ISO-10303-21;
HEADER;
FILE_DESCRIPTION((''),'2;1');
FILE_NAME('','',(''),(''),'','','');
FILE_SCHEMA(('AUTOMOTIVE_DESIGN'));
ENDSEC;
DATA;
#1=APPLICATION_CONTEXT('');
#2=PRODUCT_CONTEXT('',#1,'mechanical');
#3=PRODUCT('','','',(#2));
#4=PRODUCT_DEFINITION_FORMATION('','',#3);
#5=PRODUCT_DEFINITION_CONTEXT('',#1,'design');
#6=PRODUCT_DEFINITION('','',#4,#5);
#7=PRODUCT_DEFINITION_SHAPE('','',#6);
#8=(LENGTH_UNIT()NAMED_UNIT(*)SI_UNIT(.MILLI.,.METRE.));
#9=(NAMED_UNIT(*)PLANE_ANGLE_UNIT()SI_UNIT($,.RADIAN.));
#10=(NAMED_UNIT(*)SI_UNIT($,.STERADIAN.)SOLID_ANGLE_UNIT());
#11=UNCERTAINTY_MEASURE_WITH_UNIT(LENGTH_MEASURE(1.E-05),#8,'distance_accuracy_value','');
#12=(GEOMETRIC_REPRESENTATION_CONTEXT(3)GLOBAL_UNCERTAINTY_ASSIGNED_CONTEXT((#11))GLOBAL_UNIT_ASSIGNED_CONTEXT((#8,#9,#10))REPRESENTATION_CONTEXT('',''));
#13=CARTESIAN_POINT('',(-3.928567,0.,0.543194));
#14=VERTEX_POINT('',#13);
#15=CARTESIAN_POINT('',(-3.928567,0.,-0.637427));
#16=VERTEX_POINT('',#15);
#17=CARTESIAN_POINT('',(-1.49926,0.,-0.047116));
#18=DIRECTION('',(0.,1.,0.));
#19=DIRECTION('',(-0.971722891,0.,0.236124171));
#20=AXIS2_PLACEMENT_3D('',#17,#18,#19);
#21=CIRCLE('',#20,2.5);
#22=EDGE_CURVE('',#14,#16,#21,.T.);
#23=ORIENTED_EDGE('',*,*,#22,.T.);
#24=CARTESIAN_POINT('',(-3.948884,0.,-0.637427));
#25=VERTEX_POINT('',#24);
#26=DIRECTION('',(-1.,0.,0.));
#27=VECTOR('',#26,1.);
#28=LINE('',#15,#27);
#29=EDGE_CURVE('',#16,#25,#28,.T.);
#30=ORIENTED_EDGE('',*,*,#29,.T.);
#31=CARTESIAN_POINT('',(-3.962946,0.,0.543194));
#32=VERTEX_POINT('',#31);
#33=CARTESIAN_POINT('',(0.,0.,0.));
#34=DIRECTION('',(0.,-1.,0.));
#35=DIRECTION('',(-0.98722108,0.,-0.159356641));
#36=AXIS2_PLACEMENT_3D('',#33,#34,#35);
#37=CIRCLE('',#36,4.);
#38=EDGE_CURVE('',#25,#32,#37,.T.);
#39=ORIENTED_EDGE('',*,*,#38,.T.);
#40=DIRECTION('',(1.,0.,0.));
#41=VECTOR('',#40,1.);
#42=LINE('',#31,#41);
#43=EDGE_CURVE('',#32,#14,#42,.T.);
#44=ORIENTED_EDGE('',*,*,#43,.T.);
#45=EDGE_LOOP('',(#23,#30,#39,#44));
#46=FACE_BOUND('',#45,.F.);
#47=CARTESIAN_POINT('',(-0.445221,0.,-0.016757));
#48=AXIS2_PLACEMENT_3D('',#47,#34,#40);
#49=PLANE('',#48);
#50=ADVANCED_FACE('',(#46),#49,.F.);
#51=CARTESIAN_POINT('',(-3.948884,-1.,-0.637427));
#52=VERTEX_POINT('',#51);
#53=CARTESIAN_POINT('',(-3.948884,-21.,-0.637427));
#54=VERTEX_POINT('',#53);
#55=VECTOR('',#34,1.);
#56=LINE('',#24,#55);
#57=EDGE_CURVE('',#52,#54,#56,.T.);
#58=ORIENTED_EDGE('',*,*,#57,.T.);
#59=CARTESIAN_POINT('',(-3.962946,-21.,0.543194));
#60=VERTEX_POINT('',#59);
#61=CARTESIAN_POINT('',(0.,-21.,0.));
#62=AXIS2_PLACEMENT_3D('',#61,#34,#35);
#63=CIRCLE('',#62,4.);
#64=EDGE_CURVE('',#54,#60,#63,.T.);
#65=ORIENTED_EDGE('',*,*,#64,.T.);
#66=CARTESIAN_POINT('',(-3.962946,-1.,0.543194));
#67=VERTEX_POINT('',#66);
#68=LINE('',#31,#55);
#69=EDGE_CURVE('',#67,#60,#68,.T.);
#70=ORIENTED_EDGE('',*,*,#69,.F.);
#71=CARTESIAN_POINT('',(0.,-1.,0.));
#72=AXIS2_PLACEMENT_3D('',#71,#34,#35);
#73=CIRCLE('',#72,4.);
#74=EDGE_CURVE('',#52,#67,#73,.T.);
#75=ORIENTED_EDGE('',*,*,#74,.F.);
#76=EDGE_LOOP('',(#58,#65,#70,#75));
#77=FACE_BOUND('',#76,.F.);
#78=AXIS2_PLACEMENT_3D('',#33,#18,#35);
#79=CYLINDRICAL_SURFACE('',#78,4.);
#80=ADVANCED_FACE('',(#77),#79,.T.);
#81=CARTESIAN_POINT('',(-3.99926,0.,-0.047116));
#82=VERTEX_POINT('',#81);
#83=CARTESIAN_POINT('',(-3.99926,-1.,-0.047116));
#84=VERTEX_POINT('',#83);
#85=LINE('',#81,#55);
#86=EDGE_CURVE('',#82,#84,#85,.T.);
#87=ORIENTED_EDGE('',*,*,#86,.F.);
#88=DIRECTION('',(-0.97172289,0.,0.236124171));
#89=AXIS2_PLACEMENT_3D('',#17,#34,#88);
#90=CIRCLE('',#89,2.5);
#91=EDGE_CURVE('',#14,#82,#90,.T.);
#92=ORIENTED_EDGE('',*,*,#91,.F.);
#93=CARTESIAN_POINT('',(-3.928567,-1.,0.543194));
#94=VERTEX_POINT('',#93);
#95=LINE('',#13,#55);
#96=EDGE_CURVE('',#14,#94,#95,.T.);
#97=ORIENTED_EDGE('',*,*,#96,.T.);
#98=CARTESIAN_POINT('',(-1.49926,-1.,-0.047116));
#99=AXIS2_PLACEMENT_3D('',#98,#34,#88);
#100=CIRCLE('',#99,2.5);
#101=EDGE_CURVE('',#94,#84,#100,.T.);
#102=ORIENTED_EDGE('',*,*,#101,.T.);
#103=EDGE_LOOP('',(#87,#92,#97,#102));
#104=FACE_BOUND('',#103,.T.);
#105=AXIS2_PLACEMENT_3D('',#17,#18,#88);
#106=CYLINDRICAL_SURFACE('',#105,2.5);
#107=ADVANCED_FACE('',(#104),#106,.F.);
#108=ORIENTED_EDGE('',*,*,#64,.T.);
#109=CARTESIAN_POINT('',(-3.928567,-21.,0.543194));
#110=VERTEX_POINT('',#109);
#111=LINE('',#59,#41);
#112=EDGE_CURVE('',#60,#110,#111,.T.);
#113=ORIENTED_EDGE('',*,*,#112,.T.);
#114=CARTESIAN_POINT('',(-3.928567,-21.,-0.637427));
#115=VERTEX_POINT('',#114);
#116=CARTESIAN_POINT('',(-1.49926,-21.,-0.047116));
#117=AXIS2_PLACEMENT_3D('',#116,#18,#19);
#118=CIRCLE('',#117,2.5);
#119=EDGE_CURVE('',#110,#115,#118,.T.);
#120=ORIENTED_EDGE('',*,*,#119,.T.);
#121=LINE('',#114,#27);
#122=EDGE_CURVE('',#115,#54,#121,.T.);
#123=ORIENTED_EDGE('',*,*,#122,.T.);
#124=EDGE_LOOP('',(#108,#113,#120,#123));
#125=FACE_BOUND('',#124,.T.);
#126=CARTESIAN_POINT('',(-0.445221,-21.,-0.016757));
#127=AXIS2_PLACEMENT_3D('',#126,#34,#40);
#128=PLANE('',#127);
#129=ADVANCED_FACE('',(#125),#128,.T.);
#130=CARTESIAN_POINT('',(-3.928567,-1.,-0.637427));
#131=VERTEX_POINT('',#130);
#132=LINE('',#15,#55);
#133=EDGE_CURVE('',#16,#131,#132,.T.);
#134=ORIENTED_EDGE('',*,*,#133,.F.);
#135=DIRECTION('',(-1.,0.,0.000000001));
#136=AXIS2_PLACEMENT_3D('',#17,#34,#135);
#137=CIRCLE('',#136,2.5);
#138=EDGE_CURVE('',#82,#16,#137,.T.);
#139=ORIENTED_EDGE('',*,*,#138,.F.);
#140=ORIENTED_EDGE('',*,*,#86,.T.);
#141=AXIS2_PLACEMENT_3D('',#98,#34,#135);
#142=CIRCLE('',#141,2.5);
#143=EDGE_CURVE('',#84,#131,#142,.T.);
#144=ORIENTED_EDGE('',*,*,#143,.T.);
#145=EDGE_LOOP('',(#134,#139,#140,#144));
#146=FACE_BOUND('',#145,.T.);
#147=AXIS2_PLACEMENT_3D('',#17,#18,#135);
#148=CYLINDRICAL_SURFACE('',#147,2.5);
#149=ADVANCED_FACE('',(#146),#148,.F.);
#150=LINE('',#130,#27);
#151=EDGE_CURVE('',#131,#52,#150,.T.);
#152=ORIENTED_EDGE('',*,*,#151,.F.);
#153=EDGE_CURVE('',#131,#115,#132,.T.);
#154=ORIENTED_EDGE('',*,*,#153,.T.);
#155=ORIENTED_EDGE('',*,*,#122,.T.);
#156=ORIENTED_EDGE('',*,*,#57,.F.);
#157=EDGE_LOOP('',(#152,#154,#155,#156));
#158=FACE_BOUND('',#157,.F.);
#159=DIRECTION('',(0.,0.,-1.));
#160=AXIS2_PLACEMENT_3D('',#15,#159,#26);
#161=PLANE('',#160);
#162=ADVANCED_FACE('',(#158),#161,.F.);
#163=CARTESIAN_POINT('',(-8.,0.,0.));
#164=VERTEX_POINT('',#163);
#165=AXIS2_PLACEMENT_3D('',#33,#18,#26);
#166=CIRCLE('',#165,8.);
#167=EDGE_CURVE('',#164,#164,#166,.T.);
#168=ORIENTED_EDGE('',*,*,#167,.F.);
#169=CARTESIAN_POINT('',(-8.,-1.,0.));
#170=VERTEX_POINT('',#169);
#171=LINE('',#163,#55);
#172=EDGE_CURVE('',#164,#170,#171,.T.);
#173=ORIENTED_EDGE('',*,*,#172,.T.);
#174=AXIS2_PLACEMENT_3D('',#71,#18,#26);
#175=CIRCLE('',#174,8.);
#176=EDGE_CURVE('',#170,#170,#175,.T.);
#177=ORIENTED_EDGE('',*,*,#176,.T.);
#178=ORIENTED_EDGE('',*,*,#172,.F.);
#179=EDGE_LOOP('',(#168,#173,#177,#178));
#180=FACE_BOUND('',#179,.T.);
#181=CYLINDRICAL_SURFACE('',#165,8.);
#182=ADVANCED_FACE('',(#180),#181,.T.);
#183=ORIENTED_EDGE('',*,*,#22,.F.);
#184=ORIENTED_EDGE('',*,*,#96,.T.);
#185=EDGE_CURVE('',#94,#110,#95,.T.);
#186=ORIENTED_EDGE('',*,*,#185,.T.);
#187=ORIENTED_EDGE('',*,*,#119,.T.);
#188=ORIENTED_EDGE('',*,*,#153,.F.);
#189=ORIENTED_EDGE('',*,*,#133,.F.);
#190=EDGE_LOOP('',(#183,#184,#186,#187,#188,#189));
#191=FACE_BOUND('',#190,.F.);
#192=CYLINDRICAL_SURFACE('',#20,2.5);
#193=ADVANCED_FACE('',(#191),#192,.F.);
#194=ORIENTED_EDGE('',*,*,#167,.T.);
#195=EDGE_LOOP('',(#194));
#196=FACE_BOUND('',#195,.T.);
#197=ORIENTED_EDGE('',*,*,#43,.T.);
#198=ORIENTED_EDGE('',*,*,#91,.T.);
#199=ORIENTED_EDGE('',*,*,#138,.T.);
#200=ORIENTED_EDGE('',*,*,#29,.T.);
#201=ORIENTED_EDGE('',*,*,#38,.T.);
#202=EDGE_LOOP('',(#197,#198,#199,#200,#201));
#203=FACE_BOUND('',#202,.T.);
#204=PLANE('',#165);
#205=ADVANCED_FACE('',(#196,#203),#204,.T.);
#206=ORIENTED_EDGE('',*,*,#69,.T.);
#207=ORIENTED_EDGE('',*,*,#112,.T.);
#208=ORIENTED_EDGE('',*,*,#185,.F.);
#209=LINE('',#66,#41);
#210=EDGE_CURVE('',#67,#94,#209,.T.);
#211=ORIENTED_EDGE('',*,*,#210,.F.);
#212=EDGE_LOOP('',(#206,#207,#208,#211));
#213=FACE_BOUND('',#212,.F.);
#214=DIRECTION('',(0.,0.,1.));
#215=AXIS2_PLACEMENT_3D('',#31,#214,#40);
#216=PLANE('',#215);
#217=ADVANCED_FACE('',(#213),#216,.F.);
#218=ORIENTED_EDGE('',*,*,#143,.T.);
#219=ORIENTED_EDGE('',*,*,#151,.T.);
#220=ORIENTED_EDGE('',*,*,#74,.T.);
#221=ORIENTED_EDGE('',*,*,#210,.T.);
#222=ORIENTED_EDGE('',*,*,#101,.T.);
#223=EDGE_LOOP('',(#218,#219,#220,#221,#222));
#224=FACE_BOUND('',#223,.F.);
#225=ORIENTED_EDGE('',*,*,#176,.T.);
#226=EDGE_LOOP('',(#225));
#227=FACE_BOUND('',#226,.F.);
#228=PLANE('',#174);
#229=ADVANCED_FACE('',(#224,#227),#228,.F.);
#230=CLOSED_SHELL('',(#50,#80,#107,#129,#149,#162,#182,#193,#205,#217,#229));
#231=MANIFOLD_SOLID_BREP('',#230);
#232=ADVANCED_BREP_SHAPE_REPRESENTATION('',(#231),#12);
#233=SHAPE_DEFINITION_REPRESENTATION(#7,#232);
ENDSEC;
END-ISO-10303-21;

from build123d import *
from build123d import SkipClean  # not in build123d's __all__

# Parameters (mm, degrees)
F1_DEPTH = 21
F2_R     = 8
F3_DEPTH = 1


with BuildPart() as f1:
    # F0 (on Front) → F1 (new body)
    with BuildSketch(Plane.XZ):
        with BuildLine():
            Line((-3.928567067, -0.6374265649), (-3.9488843202, -0.6374265649))
            ThreePointArc((-3.9488843202, -0.6374265649), (3.9997163197, 0.0476378244), (-3.9629458697, 0.5431942877))
            Line((-3.9629458697, 0.5431942877), (-3.928567067, 0.5431942877))
            ThreePointArc((-3.928567067, 0.5431942877), (1.0007401595, -0.0471161386), (-3.928567067, -0.6374265649))
        make_face()
    extrude(amount=F1_DEPTH)

    # F2 (on face) → F3 (join)
    with BuildSketch(Plane(origin=(0, 0, 0), x_dir=(-1, 0, 0), z_dir=(0, 1, 0))):
        Circle(F2_R)
        with BuildLine():
            ThreePointArc((3.928567067, 0.5431942877), (3.9815237333, 0.250147998), (3.9992598405, -0.0471161386))
            ThreePointArc((3.9992598405, -0.0471161386), (3.9815237333, -0.3443802752), (3.928567067, -0.6374265649))
            Line((3.928567067, -0.6374265649), (3.9488843202, -0.6374265649))
            ThreePointArc((3.9488843202, -0.6374265649), (-3.9997163197, 0.0476378244), (3.9629458697, 0.5431942877))
            Line((3.9629458697, 0.5431942877), (3.928567067, 0.5431942877))
        make_face(mode=Mode.SUBTRACT)
    with SkipClean():  # cleaning this boolean's faces spoils the solid; the shape is the same uncleaned
        extrude(amount=-F3_DEPTH)


solid = f1.part
